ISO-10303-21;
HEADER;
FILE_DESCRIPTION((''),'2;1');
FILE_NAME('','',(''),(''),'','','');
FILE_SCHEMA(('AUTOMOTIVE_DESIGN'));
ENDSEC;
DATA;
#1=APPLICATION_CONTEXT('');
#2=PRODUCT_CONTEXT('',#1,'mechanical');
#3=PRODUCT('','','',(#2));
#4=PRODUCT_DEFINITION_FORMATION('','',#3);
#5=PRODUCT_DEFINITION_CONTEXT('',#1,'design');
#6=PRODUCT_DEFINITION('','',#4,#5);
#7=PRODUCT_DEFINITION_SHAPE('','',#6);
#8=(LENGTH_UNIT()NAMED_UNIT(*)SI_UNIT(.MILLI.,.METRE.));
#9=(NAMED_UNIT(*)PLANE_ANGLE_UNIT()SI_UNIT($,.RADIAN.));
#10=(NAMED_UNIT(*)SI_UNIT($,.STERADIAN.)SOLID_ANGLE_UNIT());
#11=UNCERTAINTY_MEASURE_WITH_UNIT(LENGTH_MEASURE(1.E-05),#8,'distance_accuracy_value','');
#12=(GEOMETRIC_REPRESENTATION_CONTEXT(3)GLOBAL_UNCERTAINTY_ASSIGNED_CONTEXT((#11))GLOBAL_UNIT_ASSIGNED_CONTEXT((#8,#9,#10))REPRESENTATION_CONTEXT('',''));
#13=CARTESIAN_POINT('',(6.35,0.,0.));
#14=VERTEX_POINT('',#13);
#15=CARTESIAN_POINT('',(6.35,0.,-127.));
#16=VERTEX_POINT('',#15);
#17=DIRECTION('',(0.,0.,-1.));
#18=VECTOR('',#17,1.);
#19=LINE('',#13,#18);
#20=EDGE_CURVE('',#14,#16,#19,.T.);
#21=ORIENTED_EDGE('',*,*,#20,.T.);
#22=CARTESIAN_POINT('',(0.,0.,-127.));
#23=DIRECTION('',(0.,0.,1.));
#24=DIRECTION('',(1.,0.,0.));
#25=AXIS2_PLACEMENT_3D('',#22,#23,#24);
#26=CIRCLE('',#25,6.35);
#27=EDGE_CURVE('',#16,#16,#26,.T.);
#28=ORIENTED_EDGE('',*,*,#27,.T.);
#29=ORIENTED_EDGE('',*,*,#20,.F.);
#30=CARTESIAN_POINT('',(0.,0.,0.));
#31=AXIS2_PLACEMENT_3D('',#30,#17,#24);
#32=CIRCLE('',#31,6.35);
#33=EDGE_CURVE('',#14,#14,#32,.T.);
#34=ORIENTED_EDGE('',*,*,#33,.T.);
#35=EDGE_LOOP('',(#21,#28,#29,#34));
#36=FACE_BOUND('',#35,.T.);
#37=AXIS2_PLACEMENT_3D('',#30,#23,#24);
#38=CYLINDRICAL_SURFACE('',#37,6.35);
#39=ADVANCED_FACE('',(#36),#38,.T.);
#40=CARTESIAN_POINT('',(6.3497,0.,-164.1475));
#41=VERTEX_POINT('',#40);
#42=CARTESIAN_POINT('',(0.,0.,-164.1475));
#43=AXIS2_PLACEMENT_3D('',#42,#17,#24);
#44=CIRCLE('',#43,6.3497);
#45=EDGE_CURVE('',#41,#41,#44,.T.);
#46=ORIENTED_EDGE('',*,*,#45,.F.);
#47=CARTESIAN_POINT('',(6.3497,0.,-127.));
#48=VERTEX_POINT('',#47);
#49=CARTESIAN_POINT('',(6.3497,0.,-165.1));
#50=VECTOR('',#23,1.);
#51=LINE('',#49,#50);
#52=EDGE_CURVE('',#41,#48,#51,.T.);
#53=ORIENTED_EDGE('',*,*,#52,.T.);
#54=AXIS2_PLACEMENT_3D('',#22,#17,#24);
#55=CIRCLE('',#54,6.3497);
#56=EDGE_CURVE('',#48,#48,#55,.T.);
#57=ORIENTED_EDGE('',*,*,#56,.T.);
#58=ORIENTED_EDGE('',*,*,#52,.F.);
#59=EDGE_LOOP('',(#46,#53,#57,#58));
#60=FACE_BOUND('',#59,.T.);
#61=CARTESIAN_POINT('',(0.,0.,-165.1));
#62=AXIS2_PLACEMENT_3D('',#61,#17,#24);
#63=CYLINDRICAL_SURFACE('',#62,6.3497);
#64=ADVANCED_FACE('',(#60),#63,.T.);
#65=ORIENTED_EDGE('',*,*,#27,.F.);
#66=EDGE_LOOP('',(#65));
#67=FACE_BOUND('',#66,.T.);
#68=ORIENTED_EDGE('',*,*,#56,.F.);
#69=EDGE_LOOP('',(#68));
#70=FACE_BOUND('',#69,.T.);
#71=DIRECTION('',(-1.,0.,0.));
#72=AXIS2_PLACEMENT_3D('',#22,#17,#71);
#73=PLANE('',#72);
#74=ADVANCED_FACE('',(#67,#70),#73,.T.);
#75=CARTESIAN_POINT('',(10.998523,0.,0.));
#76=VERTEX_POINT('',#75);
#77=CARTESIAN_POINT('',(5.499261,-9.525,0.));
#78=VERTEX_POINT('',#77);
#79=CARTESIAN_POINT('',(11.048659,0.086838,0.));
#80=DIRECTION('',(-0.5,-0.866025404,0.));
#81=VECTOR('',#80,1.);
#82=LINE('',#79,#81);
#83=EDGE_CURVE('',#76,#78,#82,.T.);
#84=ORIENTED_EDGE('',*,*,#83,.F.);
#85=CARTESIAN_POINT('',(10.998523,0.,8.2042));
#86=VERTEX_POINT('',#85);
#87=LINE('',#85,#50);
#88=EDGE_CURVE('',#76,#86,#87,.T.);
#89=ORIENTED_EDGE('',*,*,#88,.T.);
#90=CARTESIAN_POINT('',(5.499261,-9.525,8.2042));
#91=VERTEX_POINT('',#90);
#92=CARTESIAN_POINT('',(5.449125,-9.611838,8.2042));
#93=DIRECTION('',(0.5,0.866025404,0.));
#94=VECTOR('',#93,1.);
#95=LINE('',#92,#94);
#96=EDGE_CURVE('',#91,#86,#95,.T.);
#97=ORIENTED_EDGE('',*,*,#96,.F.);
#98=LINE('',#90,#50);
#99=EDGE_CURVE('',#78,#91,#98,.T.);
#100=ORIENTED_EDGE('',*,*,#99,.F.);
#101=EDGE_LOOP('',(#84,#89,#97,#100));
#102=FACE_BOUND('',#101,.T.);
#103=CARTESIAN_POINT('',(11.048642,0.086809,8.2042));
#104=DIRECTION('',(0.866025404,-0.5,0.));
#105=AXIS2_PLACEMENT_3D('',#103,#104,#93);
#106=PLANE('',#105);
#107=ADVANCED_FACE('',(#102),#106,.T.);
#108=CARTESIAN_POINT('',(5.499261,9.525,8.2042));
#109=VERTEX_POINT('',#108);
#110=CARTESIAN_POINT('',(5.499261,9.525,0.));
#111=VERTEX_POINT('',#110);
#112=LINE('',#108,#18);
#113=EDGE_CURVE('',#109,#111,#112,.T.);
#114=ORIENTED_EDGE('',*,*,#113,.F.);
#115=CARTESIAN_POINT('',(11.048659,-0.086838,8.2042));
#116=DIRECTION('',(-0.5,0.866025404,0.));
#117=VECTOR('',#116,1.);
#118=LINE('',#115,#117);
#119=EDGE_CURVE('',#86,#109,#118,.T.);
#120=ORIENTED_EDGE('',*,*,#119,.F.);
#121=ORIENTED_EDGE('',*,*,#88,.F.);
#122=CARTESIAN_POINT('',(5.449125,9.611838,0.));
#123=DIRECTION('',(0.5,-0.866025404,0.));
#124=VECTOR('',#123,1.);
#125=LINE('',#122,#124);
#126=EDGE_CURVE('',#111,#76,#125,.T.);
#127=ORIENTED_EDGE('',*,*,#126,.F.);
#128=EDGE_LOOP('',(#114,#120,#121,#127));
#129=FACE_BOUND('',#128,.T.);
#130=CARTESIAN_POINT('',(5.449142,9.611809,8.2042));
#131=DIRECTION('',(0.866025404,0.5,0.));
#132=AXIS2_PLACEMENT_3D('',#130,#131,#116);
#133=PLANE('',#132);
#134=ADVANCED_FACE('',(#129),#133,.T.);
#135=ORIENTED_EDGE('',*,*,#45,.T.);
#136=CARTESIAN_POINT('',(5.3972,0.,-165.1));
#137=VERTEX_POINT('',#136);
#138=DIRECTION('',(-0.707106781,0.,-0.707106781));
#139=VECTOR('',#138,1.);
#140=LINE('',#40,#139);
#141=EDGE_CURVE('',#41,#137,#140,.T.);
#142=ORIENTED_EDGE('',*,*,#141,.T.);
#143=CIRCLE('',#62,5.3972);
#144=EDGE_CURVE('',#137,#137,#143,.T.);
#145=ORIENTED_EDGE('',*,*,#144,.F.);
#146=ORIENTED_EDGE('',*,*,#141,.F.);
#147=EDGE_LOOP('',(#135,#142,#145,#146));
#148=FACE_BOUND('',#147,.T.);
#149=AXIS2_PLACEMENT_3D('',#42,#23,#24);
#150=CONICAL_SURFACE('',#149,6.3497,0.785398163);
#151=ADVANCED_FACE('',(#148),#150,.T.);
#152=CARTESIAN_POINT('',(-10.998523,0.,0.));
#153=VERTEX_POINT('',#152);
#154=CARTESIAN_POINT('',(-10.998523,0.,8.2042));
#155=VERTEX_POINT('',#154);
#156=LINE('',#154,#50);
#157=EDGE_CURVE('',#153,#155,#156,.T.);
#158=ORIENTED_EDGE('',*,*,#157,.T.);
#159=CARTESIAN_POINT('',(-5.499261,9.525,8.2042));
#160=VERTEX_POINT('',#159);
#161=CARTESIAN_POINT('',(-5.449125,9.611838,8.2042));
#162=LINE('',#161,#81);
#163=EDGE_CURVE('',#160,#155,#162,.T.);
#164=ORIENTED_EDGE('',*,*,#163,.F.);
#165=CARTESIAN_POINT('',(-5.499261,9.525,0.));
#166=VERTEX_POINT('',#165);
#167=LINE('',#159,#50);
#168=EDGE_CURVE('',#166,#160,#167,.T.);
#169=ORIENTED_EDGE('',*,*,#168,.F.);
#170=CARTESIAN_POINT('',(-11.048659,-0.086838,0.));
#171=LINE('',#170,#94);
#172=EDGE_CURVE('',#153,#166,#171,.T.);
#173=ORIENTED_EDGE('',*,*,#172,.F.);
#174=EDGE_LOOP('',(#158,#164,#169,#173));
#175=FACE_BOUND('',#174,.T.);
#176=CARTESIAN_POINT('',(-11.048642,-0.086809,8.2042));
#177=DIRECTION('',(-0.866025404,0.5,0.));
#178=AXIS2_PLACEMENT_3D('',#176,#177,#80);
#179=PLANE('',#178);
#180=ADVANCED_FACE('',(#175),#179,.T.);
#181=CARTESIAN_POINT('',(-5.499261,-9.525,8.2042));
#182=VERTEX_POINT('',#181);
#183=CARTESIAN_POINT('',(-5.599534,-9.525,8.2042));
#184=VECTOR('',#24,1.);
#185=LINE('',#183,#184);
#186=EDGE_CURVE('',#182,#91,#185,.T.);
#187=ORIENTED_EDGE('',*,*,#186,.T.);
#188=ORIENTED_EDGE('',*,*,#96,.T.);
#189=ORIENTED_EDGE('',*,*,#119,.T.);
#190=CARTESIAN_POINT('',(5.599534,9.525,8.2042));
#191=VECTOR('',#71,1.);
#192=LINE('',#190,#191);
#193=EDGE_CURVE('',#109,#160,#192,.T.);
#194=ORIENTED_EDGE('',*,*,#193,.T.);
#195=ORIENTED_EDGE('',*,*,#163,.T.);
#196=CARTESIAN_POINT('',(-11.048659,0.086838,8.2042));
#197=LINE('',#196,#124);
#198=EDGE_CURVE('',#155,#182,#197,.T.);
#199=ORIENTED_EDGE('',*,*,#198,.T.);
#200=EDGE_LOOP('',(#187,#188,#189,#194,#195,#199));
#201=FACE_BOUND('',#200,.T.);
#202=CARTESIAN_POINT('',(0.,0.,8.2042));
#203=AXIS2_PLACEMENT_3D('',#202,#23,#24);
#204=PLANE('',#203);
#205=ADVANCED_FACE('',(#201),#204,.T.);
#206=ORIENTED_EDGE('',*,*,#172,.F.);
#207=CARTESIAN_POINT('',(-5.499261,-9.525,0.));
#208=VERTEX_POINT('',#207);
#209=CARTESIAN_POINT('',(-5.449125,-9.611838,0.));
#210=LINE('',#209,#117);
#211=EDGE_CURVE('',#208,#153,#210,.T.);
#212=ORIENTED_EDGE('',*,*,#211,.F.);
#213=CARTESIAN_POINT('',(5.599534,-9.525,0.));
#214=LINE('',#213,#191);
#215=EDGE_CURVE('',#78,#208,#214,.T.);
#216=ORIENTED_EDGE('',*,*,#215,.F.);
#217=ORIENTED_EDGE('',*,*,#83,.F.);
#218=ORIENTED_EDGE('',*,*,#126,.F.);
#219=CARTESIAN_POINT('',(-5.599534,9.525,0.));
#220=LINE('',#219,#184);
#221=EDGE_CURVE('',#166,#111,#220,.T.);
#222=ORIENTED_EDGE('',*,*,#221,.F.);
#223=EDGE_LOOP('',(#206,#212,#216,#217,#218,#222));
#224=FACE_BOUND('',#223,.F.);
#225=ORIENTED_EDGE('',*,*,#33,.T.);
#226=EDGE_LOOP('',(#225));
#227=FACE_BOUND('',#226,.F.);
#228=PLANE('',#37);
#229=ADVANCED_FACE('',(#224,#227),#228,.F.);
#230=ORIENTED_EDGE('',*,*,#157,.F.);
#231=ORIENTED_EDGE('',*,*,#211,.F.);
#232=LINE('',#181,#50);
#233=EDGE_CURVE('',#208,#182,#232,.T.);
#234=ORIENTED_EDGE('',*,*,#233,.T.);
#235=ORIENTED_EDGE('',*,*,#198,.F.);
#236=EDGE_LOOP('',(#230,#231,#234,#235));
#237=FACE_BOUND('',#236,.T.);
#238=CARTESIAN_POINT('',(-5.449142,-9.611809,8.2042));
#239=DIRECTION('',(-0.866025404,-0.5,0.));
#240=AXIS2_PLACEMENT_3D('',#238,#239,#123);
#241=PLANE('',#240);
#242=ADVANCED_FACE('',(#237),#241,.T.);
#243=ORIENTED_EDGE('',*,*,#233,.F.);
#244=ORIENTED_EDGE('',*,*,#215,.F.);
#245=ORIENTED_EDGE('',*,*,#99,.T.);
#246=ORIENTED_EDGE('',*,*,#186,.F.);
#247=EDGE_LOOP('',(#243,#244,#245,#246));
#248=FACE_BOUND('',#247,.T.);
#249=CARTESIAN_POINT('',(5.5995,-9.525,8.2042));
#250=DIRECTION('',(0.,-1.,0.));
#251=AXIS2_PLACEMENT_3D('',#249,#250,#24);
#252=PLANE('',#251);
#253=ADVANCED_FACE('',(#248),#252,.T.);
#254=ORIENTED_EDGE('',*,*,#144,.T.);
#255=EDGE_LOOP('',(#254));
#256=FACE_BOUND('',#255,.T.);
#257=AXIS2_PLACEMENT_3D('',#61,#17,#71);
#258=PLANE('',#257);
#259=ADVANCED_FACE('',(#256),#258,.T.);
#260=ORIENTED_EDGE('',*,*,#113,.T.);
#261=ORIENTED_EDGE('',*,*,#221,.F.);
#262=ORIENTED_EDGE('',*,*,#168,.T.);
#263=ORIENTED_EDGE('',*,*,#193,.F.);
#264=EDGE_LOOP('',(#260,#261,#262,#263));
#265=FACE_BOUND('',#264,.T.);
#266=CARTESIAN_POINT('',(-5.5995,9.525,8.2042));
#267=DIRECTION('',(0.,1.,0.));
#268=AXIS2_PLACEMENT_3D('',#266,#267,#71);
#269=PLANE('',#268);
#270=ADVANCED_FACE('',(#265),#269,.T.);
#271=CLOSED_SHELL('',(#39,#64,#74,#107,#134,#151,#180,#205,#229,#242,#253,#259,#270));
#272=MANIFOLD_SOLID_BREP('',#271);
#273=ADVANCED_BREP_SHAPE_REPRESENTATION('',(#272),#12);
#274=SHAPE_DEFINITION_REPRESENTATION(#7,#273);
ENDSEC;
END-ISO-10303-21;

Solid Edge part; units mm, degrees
sketch "Sketch1" plane through (0, 0, 0) normal (0, 0, 1) x (1, 0, 0)
  circle A0 centre (0, 0) radius 11.049
  dimension "D1" = 22.098
extrude "Protrusion1" add sketch "Sketch1" along normal blind 8.2042
sketch "Sketch2" plane through (0, 0, 0) normal (0, 0, -1) x (1, 0, 0)
  circle A0 centre (0, 0) radius 6.35
extrude "Protrusion2" add sketch "Sketch2" along normal blind 165.1
sketch "Sketch3" plane through (0, 0, -165.1) normal (0, 0, -1) x (1, 0, 0)
  circle A0 centre (0, 0) radius 6.3497
extrude "Cutout1" cut sketch "Sketch3" against normal blind 38.1 flip side to cut
chamfer "Chamfer_1" distance 0.9525 angle 45 1 edges at (-6.3497, 0, -165.1)
sketch "Sketch4" plane through (0, 0, 8.2042) normal (0, 0, 1) x (1, 0, 0)
  line L0 (-5.5995, 9.525) -> (5.5995, 9.525)
  dimension "D1" = 19.05
extrude "Cutout2" cut sketch "Sketch4" against normal up to next material side at (0, 9.575, 8.2042)
pattern_circular "Pattern1" count 6 over 360 about axis through (0, 0, 8.2042) along (0, 0, 1) of "Cutout2"
properties part number "24102117"
